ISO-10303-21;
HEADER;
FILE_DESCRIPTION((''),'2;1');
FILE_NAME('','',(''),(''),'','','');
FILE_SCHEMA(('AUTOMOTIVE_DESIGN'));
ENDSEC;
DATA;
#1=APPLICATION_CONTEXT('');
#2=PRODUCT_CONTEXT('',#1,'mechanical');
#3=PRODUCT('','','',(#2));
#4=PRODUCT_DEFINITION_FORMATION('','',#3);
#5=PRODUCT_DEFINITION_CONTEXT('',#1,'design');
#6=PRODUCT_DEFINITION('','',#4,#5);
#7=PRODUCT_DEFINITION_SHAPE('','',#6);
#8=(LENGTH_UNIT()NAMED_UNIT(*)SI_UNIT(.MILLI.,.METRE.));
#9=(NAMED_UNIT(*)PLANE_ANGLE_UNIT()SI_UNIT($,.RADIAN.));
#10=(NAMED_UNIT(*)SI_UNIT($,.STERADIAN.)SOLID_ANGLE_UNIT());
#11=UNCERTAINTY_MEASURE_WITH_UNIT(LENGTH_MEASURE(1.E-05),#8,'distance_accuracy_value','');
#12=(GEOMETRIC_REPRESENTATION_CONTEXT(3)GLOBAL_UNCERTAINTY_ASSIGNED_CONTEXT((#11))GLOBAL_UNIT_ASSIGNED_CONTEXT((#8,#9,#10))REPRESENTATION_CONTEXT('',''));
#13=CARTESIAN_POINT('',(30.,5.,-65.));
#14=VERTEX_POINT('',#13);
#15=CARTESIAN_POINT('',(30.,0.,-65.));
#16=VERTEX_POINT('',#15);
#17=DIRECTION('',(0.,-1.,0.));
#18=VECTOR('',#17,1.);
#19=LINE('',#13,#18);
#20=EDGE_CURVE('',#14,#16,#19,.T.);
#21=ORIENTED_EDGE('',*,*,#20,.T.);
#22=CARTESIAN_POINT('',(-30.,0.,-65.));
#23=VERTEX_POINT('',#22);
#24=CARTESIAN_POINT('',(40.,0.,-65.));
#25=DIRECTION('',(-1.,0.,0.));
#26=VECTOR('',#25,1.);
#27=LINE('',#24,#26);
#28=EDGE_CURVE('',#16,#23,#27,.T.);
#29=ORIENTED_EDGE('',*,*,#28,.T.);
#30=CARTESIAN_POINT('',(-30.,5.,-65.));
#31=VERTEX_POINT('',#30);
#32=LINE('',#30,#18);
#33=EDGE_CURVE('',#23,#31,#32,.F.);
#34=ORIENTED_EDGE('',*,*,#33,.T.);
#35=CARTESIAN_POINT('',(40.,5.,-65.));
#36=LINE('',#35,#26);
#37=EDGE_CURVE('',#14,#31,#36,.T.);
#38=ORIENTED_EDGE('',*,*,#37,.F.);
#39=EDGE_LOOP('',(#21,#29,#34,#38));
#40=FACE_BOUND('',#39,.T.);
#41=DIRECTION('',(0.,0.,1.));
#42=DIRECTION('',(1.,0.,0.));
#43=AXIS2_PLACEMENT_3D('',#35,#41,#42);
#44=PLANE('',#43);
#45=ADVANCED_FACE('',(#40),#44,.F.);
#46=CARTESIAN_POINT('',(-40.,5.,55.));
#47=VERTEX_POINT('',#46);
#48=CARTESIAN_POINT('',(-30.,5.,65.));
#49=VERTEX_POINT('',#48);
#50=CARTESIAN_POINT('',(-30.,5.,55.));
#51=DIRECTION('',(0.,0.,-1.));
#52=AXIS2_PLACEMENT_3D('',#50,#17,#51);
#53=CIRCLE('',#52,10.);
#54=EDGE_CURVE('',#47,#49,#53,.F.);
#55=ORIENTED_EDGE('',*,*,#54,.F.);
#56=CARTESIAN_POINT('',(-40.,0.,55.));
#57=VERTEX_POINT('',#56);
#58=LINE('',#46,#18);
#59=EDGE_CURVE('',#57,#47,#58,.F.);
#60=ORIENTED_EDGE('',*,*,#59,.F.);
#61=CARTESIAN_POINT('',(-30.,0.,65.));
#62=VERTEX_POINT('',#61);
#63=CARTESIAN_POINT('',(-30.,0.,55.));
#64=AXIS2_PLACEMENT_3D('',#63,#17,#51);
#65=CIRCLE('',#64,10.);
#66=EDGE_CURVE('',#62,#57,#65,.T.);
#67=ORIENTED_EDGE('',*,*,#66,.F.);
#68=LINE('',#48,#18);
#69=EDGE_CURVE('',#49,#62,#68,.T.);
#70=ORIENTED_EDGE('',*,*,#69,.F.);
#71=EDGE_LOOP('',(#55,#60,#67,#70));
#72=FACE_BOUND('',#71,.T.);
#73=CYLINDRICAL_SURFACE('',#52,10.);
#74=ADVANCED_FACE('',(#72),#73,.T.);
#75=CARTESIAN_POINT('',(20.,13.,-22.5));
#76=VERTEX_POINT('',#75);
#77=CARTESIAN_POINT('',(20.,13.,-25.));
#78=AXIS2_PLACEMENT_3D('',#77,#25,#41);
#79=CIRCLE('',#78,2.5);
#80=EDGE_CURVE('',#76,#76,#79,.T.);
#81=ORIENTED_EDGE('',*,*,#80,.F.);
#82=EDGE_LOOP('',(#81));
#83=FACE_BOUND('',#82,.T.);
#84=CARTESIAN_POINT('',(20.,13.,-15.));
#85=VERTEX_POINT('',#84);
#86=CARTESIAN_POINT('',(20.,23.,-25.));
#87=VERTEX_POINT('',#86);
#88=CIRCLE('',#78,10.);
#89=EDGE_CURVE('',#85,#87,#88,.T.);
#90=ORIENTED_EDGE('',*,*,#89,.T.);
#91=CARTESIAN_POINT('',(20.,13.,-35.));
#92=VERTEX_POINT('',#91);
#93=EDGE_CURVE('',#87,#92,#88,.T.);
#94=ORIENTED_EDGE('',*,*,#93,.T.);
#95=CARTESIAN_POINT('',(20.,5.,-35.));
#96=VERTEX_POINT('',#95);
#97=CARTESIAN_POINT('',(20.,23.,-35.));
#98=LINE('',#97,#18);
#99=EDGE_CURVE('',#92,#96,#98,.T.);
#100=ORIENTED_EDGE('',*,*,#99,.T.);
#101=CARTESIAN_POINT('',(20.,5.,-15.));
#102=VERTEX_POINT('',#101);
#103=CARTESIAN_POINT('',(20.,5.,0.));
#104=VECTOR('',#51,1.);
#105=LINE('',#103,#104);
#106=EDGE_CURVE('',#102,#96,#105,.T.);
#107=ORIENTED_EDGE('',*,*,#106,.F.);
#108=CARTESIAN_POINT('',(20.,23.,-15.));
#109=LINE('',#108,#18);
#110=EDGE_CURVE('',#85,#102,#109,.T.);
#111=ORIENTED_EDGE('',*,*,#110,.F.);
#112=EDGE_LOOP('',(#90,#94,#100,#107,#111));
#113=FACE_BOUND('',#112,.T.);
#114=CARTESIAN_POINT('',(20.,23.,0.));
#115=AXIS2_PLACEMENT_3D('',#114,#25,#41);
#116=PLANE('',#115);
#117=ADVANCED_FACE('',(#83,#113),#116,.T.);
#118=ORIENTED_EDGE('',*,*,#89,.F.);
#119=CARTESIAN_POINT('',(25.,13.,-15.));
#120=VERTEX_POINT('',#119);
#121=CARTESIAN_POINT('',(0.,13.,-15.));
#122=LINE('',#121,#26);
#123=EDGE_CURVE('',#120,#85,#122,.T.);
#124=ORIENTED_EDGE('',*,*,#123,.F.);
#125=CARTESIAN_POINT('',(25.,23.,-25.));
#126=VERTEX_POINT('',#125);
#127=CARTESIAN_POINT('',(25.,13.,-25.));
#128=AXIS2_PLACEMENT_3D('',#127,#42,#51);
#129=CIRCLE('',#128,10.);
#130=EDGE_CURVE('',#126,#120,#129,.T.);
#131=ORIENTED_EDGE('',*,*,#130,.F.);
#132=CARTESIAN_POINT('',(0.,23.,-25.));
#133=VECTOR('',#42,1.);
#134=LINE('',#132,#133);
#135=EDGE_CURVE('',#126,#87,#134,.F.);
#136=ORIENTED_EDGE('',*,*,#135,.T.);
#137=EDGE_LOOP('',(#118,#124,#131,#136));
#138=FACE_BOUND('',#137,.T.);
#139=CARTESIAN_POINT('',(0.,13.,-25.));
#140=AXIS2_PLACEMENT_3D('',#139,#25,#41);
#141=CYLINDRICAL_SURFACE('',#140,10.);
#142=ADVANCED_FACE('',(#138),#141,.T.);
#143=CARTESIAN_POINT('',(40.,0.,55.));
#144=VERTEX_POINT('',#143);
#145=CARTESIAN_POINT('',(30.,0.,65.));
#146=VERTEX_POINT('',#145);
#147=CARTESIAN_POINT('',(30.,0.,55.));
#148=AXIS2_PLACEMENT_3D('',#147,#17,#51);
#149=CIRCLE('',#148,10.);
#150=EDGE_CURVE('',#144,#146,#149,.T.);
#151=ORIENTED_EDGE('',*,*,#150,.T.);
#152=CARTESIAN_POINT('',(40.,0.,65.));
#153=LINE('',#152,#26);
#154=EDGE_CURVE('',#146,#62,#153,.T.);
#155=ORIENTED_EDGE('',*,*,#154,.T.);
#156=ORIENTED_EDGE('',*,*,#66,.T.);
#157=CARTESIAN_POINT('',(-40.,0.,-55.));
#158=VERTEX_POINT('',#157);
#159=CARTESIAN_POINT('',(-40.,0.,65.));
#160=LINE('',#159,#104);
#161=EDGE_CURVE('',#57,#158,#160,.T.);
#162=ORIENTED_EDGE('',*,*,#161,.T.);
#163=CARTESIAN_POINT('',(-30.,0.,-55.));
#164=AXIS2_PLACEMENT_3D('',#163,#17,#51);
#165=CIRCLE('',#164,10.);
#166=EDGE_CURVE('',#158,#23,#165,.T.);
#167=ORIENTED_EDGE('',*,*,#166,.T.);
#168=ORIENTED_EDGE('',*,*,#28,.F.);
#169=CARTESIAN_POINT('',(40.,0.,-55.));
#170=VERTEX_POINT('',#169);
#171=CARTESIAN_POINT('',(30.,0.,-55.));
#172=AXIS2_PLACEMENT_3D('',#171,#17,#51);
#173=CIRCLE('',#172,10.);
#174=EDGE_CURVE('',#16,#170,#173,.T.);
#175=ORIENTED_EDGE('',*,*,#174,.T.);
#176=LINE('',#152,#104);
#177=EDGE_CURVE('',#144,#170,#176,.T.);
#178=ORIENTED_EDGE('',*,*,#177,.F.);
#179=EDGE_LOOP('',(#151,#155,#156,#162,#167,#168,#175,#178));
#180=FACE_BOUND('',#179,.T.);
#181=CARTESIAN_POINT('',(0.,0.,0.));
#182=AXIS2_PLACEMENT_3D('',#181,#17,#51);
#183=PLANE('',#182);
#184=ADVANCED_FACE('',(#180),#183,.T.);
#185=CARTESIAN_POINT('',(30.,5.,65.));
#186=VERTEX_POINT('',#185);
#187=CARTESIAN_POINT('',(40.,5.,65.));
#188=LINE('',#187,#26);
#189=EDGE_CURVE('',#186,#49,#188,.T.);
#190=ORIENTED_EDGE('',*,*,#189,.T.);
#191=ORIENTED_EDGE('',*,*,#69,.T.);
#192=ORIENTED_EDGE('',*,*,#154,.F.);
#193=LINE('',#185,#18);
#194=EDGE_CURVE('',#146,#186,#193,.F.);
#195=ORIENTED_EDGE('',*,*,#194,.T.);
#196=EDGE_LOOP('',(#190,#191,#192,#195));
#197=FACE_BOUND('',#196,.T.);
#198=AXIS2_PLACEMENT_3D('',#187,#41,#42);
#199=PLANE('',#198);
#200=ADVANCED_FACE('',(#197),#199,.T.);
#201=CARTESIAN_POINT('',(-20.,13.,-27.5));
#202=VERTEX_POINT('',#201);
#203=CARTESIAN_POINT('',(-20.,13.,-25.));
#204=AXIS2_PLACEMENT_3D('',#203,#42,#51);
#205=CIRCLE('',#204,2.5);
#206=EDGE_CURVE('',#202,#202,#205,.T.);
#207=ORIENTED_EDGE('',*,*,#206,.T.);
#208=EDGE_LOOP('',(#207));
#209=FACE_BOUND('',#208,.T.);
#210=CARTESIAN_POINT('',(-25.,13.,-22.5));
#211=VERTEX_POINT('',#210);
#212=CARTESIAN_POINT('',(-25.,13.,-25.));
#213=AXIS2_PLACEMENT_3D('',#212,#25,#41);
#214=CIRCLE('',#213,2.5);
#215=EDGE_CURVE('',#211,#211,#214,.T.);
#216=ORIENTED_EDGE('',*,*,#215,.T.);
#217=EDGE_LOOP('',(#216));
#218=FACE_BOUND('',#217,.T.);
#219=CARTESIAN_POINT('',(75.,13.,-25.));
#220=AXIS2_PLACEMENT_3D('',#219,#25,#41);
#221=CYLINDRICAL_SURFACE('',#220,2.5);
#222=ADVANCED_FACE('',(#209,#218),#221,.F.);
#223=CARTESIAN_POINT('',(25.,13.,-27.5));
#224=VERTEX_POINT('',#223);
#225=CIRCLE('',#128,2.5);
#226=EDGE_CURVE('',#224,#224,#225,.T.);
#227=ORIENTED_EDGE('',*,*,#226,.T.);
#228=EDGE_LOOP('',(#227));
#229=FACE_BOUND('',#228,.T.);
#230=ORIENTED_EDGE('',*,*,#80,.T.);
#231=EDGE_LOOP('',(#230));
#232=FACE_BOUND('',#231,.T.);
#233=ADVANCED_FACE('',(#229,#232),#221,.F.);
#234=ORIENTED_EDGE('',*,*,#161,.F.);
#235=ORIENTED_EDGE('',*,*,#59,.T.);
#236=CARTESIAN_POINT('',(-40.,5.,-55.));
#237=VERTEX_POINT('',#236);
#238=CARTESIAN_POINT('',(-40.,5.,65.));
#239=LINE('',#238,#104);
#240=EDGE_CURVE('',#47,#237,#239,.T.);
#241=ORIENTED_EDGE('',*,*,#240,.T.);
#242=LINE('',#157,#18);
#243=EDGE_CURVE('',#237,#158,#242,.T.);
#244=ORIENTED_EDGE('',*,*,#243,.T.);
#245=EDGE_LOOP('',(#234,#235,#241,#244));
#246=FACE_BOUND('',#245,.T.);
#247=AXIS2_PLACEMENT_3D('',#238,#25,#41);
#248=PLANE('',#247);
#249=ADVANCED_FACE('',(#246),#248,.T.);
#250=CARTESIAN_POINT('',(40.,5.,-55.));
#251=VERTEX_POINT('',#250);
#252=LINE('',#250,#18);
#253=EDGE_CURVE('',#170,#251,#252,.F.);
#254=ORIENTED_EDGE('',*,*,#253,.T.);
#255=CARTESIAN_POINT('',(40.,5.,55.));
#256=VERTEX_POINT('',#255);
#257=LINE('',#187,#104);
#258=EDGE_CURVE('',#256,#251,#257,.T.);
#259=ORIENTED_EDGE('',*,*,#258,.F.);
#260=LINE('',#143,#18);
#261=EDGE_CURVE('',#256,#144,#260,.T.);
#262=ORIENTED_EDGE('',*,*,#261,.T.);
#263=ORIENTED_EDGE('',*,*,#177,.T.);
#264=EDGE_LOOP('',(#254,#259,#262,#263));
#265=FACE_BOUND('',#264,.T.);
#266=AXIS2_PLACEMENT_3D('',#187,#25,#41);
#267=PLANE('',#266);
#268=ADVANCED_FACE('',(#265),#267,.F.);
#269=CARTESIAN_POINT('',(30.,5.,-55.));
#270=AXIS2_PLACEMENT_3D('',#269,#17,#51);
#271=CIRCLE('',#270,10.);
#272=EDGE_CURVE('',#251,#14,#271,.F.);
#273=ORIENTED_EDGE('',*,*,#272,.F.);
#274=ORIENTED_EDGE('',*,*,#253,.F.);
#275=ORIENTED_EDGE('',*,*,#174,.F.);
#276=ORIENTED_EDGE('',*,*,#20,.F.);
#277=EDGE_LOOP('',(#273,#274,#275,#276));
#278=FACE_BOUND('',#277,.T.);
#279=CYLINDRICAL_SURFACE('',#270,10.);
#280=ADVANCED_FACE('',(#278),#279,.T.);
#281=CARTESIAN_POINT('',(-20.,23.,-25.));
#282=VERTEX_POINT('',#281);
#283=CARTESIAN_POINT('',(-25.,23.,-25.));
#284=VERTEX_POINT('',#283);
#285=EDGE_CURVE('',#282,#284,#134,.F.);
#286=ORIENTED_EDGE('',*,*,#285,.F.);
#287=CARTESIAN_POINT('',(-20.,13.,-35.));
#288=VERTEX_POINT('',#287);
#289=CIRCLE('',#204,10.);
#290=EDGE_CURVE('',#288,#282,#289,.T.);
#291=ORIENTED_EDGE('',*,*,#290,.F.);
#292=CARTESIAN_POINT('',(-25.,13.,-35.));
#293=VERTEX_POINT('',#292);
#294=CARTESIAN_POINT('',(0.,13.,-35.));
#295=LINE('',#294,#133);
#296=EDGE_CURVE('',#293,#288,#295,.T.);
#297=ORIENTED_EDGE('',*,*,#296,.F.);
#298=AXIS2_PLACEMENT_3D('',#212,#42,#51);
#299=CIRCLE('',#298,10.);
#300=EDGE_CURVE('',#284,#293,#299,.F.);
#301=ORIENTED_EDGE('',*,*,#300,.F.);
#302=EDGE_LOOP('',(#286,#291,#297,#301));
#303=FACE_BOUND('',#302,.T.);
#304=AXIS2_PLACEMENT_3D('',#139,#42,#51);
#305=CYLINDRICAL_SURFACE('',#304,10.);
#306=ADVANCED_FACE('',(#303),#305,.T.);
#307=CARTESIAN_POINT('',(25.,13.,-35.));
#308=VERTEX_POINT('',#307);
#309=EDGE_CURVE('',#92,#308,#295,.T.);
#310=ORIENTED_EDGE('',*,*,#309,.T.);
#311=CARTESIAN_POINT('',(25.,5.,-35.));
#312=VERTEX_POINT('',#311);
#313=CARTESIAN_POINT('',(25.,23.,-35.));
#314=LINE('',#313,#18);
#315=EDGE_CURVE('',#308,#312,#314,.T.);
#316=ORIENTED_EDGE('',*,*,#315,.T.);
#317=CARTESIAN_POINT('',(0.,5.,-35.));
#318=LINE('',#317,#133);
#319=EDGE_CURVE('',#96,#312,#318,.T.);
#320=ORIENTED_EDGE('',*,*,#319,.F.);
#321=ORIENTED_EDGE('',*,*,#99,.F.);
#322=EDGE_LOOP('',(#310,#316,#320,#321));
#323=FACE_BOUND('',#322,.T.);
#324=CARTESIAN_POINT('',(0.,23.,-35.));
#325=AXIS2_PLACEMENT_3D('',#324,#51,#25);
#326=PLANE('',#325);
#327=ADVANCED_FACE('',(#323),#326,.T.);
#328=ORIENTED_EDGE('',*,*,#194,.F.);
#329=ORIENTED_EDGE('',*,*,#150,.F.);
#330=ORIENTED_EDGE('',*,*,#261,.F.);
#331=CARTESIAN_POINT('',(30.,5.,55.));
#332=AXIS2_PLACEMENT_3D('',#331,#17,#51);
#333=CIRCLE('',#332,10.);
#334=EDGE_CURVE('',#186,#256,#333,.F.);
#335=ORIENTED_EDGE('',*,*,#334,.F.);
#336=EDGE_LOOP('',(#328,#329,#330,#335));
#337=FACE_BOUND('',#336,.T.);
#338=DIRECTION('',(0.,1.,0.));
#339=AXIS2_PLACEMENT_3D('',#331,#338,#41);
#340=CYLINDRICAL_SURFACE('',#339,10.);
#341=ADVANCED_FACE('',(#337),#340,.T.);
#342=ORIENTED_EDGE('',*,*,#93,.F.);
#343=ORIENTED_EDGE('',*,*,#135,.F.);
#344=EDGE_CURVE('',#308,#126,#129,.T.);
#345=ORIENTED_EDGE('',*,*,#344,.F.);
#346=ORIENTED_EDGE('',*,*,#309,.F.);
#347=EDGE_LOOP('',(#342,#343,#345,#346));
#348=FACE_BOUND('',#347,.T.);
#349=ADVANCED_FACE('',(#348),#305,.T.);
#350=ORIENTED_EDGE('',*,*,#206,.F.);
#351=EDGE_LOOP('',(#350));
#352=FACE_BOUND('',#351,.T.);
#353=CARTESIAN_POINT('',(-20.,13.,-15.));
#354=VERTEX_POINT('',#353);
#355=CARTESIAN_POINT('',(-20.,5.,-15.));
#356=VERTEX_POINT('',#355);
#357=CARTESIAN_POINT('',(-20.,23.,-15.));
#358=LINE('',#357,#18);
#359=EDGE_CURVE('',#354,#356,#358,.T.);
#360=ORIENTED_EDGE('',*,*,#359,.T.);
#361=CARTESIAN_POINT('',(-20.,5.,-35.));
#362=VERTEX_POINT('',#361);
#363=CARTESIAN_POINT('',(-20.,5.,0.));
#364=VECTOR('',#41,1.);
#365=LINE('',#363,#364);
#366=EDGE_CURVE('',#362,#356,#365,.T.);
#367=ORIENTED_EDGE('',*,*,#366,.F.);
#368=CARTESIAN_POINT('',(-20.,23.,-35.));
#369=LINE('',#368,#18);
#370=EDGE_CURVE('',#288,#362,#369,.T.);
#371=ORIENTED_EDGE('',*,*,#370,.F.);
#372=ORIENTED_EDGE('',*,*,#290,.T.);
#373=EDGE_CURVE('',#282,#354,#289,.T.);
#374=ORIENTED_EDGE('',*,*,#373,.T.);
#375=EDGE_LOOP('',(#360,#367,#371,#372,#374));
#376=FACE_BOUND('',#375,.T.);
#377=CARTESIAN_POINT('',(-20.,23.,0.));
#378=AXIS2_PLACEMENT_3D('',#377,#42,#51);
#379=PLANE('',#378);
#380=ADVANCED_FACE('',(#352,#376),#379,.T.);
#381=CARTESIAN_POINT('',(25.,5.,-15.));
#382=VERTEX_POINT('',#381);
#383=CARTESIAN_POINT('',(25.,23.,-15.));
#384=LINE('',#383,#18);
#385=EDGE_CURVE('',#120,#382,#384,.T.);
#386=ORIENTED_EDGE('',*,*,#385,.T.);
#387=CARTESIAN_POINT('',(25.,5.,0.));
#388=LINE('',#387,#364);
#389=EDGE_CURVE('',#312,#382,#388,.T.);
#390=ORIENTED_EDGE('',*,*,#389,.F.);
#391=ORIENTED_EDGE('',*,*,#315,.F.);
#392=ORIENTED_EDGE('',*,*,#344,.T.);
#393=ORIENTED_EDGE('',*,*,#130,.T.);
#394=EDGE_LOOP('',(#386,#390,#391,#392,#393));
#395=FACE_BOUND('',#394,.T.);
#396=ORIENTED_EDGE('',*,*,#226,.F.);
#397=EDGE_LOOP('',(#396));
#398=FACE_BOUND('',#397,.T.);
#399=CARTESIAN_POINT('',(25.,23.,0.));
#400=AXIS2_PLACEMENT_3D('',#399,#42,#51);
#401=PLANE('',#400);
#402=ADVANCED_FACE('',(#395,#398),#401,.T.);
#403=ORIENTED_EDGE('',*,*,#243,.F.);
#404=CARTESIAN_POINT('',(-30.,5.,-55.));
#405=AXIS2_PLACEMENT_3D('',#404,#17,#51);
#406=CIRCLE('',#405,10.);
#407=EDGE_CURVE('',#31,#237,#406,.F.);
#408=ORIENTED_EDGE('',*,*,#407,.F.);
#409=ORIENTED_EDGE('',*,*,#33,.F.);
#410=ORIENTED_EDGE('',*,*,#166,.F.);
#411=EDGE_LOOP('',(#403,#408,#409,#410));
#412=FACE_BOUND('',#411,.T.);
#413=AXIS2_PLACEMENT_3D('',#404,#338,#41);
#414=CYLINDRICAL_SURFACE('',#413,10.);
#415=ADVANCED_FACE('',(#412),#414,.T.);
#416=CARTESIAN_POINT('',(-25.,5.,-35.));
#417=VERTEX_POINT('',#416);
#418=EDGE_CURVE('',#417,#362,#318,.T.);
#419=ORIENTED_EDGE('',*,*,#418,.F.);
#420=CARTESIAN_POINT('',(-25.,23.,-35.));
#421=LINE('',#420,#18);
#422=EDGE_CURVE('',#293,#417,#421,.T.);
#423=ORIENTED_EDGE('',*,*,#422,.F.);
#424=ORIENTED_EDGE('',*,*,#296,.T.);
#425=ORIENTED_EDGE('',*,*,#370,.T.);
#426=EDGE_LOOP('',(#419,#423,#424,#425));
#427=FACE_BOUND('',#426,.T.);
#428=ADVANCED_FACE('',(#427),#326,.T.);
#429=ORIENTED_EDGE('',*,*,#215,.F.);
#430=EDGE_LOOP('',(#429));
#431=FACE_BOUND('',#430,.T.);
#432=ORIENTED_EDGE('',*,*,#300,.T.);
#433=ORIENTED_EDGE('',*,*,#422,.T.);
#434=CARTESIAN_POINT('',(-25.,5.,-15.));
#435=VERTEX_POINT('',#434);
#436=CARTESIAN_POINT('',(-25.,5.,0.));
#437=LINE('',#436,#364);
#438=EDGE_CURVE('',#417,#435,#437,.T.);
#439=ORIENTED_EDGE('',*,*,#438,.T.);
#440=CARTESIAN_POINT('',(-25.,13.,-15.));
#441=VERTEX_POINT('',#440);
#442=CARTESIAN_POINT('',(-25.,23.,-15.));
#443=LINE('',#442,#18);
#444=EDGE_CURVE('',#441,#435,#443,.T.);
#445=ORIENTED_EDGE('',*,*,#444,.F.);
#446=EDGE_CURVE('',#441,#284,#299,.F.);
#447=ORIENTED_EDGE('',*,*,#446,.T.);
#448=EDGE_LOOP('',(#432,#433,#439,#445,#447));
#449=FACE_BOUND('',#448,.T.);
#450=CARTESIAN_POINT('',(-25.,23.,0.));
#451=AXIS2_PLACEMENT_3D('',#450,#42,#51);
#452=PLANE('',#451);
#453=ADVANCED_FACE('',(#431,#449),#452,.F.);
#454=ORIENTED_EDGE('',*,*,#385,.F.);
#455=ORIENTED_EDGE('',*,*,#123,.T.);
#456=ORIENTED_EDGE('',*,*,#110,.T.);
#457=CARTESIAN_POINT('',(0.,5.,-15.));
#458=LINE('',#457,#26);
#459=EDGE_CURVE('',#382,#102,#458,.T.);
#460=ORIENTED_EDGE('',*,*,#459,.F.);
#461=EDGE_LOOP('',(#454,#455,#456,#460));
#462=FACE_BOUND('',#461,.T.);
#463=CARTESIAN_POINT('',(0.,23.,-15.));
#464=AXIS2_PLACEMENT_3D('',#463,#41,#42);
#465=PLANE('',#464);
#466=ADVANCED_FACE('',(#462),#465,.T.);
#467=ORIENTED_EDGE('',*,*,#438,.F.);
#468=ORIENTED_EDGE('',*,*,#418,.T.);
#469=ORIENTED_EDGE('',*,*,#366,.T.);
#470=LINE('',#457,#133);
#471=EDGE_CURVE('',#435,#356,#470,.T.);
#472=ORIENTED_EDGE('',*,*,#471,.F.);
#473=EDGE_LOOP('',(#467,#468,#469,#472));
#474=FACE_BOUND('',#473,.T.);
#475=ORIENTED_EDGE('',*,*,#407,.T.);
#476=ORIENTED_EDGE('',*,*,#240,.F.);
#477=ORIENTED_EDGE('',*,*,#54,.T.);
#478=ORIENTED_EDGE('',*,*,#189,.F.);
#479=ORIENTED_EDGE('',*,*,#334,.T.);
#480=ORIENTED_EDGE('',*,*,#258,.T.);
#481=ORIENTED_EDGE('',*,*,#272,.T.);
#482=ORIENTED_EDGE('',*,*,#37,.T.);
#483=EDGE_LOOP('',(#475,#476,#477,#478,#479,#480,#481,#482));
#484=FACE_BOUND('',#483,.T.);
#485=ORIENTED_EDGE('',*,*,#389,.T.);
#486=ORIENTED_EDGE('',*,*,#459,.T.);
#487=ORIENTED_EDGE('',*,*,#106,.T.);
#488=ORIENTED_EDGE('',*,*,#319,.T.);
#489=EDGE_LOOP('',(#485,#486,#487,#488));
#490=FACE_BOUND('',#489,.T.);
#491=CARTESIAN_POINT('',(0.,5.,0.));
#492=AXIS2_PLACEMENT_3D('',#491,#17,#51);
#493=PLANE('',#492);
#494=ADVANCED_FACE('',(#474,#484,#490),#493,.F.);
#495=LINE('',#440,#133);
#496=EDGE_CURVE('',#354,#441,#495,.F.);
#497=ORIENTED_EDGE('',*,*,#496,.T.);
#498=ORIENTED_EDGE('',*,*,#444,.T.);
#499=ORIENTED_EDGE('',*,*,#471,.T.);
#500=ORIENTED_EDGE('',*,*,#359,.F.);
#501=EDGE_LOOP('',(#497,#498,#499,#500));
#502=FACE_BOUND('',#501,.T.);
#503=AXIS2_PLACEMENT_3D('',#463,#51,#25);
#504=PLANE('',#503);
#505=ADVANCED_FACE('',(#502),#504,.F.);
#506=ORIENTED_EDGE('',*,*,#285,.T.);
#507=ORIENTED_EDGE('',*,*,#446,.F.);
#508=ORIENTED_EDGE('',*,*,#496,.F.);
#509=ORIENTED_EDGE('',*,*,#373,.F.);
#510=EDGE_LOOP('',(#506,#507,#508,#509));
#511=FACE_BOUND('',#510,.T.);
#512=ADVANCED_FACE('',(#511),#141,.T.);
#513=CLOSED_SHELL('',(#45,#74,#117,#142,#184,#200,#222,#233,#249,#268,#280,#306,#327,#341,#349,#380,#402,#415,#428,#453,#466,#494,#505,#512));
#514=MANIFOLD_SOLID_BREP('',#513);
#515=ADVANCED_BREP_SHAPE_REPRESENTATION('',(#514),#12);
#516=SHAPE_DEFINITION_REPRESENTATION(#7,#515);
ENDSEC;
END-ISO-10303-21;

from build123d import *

# Parameters (mm, degrees)
SZKIC1_W                    = 80
SZKIC1_H                    = 130
DODANIE_WYCI_GNI_CIE1_DEPTH = 5
ZAOKR_GLENIE1_R             = 10
SZKIC2_W                    = 5
SZKIC2_H                    = 20
DODANIE_WYCI_GNI_CIE2_DEPTH = 18
ZAOKR_GLENIE2_R             = 10
SZKIC3_R                    = 2.5
WYTNIJ_WYCI_GNI_CIE1_DEPTH  = 100


with BuildPart() as part:
    # Szkic1 → Dodanie-wyciągnięcie1 (new body)
    with BuildSketch(Plane(origin=(0, 0, 0), x_dir=(1, 0, 0), z_dir=(0, 1, 0))):
        Rectangle(SZKIC1_W, SZKIC1_H)
    extrude(amount=DODANIE_WYCI_GNI_CIE1_DEPTH)

    # Zaokrąglenie1
    zaokr_glenie1_edges = [part.edges().sort_by_distance(p)[0] for p in [
        (40, 2.5, -65),
        (40, 2.5, 65),
        (-40, 2.5, 65),
        (-40, 2.5, -65),
    ]]
    fillet(zaokr_glenie1_edges, radius=ZAOKR_GLENIE1_R)

    # Szkic2 → Dodanie-wyciągnięcie2 (add)
    with BuildSketch(Plane(origin=(0, 5, 0), x_dir=(1, 0, 0), z_dir=(0, 1, 0))):
        with Locations((-22.5, 25)):
            Rectangle(SZKIC2_W, SZKIC2_H)
        with Locations((22.5, 25)):
            Rectangle(SZKIC2_W, SZKIC2_H)
    extrude(amount=DODANIE_WYCI_GNI_CIE2_DEPTH)

    # Zaokrąglenie2
    zaokr_glenie2_edges = [part.edges().sort_by_distance(p)[0] for p in [
        (22.5, 23, -15),
        (22.5, 23, -35),
        (-22.5, 23, -15),
        (-22.5, 23, -35),
    ]]
    fillet(zaokr_glenie2_edges, radius=ZAOKR_GLENIE2_R - 0.0001)  # a hair under: the kernel refuses the full size

    # Szkic3 → Wytnij-wyciągnięcie1 (cut)
    with BuildSketch(Plane.ZY.offset(25)):
        with Locations((-25, 13)):
            Circle(SZKIC3_R)
    extrude(amount=-WYTNIJ_WYCI_GNI_CIE1_DEPTH, mode=Mode.SUBTRACT)


solid = part.part
